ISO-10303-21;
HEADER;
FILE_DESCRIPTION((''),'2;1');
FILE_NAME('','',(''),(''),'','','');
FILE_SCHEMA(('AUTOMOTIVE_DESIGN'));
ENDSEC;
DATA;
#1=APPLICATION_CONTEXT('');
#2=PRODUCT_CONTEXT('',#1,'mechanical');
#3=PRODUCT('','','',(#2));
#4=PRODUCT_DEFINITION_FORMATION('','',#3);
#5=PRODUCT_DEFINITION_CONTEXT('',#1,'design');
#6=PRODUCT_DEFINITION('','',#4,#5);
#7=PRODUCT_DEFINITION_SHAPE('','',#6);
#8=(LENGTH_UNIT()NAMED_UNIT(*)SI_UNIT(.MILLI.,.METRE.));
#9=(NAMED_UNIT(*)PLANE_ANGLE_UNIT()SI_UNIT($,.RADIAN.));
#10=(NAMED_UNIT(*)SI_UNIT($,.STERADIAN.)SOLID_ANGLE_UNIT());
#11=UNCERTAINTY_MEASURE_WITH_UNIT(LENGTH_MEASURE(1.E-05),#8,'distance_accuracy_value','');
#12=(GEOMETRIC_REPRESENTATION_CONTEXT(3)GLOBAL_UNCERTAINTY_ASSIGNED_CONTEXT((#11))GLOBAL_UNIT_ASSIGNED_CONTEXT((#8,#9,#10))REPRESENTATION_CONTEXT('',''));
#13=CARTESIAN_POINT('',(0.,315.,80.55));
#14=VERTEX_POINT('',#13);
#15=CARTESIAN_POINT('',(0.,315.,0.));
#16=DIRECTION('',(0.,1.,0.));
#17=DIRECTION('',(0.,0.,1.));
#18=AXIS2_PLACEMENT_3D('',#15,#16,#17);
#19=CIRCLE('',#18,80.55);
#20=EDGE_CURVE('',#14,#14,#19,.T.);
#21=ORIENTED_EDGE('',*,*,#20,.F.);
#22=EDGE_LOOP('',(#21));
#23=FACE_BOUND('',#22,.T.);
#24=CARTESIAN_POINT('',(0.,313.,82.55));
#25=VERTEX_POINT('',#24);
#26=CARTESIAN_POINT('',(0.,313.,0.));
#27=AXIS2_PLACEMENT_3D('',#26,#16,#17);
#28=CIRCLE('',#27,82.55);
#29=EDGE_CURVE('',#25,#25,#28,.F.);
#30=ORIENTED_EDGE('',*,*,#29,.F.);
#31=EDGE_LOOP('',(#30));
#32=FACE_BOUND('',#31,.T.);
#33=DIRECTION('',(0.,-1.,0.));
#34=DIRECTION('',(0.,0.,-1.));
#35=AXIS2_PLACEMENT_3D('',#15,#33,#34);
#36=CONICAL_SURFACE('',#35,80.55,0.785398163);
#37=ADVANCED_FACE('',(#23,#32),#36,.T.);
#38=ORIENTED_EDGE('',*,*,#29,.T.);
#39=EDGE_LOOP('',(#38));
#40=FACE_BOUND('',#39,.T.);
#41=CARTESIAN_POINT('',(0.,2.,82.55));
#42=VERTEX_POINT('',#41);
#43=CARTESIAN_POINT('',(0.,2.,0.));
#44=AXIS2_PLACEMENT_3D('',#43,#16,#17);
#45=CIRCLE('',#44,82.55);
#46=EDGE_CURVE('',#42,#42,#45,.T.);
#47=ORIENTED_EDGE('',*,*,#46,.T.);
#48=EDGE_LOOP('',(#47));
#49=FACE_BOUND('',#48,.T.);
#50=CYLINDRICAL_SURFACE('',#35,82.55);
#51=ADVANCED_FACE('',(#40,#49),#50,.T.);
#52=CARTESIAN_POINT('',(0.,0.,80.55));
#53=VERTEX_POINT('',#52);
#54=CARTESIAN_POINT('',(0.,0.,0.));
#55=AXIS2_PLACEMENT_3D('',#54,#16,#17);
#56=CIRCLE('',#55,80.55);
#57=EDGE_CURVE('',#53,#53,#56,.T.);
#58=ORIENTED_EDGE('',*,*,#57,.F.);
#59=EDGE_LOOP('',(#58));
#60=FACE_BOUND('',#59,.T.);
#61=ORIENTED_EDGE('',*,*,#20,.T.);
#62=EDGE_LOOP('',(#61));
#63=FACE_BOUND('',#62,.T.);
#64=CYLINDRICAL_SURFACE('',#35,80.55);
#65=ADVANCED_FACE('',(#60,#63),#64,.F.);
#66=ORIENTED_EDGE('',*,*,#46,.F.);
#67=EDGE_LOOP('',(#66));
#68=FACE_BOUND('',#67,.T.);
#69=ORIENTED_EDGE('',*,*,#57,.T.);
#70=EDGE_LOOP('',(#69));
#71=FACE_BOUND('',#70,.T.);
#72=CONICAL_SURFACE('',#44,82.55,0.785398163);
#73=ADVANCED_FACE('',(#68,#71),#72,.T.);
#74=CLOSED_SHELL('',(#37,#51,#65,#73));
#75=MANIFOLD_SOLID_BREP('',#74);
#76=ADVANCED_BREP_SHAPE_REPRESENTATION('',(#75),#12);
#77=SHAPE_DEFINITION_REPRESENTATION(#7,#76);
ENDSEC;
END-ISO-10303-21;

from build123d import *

# Parameters (mm, degrees)
SKETCH1_R           = 82.55
SKETCH1_R_2         = 80.55
BOSS_EXTRUDE1_DEPTH = 315
CHAMFER1_SIZE       = 2


with BuildPart() as part:
    # Sketch1 → Boss-Extrude1 (new body)
    with BuildSketch(Plane(origin=(0, 0, 0), x_dir=(1, 0, 0), z_dir=(0, 1, 0))):
        with Locations(Location((0, 0, 0), (0, 0, 270))):
            Circle(SKETCH1_R)
        with Locations(Location((0, 0, 0), (0, 0, 270))):
            Circle(SKETCH1_R_2, mode=Mode.SUBTRACT)
    extrude(amount=BOSS_EXTRUDE1_DEPTH)

    # Chamfer1
    chamfer1_edges = [part.edges().sort_by_distance(p)[0] for p in [
        (0, 0, -82.55),
        (0, 315, -82.55),
    ]]
    chamfer(chamfer1_edges, length=CHAMFER1_SIZE - 0.0001)  # a hair under: the kernel refuses the full size


solid = part.part
